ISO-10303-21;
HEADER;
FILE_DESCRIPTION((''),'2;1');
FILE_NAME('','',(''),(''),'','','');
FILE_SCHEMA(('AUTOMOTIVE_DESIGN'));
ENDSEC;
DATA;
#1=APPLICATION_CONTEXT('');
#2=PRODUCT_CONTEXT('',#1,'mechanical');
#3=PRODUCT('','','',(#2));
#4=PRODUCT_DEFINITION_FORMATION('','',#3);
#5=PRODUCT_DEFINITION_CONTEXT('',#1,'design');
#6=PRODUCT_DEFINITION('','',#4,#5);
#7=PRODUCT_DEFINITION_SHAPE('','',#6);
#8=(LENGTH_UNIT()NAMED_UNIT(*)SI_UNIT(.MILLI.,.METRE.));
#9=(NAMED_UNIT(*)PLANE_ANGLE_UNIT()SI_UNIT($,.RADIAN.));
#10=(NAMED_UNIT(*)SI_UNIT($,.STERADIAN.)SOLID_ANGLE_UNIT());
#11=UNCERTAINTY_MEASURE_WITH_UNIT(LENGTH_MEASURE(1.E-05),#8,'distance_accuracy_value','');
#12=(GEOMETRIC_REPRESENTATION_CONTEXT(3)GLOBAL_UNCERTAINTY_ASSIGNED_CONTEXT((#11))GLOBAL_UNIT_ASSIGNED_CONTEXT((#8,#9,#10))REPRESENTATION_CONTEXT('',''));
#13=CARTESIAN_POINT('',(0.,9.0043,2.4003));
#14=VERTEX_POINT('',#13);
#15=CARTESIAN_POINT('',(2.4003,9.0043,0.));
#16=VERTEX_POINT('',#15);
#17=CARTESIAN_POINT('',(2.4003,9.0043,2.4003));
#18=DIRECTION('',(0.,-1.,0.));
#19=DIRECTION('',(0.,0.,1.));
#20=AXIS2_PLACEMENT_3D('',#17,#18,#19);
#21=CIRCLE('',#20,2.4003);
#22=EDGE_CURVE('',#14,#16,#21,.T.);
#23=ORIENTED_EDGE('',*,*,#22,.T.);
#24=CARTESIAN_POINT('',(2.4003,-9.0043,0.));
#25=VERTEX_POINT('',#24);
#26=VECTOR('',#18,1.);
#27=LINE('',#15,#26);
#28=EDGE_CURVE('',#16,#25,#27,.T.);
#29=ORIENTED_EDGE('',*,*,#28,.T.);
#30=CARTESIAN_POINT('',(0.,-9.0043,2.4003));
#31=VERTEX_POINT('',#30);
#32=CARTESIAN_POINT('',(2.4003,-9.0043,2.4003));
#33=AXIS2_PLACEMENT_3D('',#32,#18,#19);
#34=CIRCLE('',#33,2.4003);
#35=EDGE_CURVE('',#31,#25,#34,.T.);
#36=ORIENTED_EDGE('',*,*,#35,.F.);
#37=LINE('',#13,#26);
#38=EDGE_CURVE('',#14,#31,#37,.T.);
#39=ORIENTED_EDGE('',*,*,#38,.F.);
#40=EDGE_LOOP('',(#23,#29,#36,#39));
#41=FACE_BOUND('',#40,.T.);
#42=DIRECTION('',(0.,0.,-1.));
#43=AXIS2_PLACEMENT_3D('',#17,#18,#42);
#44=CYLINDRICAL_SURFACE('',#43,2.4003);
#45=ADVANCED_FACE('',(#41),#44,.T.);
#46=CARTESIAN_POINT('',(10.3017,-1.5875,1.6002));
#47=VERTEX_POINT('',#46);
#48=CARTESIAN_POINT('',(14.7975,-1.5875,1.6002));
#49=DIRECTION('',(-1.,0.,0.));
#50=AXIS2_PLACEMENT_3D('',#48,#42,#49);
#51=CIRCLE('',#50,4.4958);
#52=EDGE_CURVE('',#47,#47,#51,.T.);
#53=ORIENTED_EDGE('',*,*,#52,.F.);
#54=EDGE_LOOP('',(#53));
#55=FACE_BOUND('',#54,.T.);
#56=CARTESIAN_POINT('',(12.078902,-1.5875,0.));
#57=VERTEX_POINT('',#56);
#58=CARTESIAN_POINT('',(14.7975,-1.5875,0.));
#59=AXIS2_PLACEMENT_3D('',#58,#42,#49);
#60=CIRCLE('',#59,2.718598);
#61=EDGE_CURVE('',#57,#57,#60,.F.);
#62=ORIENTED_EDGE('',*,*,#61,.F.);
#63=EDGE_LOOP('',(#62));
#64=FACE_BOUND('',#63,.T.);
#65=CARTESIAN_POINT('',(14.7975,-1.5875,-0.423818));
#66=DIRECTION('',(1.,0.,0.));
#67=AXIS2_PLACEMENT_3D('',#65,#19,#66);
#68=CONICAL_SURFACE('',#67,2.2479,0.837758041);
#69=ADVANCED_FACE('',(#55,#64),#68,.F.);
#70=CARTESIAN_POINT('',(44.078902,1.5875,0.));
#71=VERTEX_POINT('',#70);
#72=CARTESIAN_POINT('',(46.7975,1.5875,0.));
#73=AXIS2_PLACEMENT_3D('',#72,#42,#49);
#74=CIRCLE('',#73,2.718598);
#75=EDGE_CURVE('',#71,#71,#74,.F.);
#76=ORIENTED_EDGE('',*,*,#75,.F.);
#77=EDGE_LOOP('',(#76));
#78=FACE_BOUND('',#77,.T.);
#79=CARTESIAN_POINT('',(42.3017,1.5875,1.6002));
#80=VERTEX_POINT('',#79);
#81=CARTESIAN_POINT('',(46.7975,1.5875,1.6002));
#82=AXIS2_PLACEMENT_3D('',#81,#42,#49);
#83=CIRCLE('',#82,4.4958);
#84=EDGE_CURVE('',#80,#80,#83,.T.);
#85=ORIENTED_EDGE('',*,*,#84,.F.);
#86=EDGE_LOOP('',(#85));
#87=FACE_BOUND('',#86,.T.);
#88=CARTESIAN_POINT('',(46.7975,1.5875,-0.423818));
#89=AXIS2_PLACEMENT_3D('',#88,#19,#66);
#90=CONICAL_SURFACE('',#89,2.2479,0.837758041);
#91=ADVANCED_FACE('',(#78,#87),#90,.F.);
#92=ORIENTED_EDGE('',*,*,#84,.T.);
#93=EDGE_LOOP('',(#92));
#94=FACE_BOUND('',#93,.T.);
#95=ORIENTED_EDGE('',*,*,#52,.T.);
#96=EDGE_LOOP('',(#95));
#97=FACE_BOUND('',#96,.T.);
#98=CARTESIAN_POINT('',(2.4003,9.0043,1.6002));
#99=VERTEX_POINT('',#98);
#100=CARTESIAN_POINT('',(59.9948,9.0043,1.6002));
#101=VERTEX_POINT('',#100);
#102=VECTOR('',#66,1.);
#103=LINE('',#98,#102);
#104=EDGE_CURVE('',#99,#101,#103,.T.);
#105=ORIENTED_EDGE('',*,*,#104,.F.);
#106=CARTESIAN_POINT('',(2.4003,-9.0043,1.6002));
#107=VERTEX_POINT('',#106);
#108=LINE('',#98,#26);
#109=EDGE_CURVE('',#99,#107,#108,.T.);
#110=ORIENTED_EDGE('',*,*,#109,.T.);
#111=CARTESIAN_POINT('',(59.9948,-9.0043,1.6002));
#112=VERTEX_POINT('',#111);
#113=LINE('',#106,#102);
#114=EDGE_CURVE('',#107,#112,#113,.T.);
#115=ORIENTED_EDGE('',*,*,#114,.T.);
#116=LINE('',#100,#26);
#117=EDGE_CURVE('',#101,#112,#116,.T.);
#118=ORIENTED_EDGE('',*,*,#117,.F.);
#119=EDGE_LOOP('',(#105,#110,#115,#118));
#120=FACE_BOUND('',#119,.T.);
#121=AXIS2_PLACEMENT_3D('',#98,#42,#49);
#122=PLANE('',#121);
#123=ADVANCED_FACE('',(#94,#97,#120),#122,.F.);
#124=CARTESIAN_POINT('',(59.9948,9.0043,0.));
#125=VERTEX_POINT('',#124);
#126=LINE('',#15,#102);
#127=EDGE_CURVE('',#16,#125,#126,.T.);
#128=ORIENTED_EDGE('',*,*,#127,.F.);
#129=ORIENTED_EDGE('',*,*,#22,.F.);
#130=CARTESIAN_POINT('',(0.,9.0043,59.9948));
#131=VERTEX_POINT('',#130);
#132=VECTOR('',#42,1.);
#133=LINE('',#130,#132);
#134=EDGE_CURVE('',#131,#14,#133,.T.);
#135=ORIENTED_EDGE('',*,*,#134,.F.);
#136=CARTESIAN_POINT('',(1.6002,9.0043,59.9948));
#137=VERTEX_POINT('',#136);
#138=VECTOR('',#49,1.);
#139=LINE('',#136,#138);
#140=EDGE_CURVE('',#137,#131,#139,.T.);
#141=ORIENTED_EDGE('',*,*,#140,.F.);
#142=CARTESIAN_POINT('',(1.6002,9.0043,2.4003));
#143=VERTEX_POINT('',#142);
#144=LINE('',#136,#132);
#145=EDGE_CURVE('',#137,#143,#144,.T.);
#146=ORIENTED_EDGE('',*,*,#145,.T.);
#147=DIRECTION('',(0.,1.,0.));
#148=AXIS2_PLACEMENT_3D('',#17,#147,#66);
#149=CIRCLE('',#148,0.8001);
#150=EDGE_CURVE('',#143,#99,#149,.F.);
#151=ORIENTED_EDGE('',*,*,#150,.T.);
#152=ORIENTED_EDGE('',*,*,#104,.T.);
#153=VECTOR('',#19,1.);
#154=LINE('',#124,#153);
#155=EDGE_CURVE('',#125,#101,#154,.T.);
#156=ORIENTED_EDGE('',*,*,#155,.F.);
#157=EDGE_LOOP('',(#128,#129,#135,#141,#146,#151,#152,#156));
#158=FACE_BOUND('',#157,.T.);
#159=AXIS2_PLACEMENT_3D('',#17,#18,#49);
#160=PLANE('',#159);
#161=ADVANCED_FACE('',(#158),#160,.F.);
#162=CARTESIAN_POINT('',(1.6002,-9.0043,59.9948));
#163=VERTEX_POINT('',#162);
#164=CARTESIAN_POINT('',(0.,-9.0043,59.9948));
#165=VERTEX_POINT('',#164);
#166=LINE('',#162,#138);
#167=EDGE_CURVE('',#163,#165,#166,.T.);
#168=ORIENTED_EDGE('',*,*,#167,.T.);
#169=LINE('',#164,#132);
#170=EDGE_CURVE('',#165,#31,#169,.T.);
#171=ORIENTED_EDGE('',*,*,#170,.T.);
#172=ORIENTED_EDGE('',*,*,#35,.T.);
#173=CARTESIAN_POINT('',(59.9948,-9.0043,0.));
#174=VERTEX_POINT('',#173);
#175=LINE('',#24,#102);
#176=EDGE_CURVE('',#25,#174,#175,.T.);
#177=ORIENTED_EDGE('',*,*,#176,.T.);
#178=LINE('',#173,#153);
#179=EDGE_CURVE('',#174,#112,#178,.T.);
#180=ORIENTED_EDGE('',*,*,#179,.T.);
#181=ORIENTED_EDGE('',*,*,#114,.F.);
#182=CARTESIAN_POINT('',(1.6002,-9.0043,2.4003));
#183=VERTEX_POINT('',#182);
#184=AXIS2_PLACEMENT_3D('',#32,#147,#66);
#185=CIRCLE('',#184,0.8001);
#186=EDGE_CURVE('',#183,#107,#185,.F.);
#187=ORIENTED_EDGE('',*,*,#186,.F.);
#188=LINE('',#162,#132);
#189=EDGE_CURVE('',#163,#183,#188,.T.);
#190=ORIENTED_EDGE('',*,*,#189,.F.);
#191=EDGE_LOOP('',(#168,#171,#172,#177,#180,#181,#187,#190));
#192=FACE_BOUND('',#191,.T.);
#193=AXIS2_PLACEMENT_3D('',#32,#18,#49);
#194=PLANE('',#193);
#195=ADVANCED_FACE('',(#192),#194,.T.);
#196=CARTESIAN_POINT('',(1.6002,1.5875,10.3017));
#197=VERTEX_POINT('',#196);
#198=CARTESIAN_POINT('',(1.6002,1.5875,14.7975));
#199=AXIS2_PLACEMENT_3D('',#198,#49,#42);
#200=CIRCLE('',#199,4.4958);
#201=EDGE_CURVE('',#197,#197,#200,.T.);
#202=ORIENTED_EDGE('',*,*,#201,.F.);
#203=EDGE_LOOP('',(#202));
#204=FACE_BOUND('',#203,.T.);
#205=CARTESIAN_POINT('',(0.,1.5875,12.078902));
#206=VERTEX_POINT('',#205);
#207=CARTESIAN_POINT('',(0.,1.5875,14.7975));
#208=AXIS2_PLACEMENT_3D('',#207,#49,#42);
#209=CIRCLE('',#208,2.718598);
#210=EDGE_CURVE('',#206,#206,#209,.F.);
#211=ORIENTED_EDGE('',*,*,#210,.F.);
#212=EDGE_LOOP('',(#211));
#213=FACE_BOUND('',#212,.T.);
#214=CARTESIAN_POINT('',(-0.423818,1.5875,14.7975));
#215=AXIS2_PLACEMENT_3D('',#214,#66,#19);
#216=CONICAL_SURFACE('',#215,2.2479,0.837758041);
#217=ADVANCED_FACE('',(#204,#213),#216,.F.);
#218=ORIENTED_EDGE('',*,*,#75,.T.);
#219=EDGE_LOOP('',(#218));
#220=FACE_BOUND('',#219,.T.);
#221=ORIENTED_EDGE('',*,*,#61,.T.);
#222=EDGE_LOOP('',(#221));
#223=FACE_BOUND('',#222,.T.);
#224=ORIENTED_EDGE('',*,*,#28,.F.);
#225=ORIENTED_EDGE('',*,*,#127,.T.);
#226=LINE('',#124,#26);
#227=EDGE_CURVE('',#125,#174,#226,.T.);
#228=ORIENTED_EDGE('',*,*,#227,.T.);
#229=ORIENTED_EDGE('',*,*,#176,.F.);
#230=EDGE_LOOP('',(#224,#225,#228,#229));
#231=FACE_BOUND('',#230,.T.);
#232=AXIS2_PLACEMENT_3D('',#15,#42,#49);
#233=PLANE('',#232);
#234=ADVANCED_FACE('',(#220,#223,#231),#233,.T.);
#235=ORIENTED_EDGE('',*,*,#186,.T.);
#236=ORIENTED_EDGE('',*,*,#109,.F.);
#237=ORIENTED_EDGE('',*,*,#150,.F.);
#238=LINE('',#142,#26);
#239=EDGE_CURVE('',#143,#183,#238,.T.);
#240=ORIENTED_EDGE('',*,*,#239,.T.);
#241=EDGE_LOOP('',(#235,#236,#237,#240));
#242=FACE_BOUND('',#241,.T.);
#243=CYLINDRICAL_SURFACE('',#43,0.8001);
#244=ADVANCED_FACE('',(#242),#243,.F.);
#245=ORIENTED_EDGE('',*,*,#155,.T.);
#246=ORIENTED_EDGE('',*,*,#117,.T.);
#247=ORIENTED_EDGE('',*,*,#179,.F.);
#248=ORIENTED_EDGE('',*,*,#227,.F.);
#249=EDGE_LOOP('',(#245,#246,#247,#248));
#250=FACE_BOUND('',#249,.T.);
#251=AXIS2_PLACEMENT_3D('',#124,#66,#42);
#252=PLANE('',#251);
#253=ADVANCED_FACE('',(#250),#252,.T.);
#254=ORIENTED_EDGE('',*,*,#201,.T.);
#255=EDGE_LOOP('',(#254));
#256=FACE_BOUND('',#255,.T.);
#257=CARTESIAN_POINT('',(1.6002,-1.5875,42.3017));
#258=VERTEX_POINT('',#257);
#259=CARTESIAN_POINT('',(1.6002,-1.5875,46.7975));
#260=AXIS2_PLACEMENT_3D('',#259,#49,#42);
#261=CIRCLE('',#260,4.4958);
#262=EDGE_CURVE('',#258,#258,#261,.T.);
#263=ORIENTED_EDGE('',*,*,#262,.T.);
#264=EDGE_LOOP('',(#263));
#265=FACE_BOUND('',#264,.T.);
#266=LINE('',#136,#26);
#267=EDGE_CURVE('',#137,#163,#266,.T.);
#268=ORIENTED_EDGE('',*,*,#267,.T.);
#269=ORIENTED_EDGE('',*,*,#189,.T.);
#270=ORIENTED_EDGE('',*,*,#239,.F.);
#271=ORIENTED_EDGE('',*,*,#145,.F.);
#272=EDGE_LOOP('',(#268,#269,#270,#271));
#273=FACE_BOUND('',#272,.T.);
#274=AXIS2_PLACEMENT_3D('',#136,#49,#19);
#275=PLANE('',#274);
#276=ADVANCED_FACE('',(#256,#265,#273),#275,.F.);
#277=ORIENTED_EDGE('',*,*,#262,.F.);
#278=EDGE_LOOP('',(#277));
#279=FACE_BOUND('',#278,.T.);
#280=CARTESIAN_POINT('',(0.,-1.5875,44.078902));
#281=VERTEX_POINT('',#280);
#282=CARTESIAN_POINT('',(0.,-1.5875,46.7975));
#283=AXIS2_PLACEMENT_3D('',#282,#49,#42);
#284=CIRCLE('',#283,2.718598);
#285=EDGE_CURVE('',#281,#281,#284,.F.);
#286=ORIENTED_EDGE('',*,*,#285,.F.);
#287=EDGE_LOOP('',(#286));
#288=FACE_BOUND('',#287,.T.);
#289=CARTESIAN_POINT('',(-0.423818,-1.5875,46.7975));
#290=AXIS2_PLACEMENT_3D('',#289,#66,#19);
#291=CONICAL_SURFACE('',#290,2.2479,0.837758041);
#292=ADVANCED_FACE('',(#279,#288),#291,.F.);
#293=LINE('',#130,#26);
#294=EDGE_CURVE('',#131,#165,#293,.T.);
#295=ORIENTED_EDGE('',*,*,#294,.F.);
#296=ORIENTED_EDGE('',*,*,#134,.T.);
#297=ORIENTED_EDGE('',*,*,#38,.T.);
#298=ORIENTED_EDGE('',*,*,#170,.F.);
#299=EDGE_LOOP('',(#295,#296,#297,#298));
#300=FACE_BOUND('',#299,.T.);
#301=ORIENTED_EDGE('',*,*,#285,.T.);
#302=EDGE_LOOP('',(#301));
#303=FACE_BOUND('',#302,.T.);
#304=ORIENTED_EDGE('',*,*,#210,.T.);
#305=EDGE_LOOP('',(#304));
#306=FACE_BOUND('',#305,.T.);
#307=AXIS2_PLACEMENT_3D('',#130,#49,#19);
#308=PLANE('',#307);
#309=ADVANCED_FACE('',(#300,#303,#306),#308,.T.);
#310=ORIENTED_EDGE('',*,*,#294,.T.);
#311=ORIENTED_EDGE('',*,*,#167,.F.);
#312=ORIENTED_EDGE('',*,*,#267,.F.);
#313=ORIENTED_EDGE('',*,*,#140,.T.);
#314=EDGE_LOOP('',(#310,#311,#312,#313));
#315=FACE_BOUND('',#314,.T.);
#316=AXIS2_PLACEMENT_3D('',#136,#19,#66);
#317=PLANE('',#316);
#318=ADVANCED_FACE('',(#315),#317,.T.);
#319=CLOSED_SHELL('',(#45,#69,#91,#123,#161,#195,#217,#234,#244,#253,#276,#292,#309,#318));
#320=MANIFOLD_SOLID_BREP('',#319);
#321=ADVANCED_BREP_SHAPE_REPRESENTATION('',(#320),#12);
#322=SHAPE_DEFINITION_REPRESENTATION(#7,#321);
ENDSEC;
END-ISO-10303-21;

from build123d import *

# Parameters (mm, degrees)
EXTRUDE_THIN2_DEPTH            = 9.0043
SKETCH4_R                      = 2.2479
CUT_EXTRUDE2_DEPTH             = 86.321916719
CHAMFER1_SIZE                  = 2.2479
CHAMFER1_SIZE_2                = 2.024018251
CIRPATTERN2_COUNT              = 2
CIRPATTERN2_ANGLE              = 180
CHAMFER1_OF_CIRPATTERN2_SIZE   = 2.024018251
CHAMFER1_OF_CIRPATTERN2_SIZE_2 = 2.2479


with BuildPart() as part:
    # Sketch3 → Extrude-Thin2 (new, symmetric)
    with BuildSketch(Plane(origin=(0, 0, 0), x_dir=(1, 0, 0), z_dir=(0, 1, 0))):
        with BuildLine():
            Line((0, -59.9948), (0, -2.4003))
            ThreePointArc((0, -2.4003), (0.703031593, -0.703031593), (2.4003, 0))
            Line((2.4003, 0), (59.9948, 0))
            Line((59.9948, 0), (59.9948, -1.6002))
            Line((59.9948, -1.6002), (2.4003, -1.6002))
            ThreePointArc((2.4003, -1.6002), (1.834543864, -1.834543864), (1.6002, -2.4003))
            Line((1.6002, -2.4003), (1.6002, -59.9948))
            Line((1.6002, -59.9948), (0, -59.9948))
        make_face()
    extrude(amount=EXTRUDE_THIN2_DEPTH, both=True)

    # Sketch4 → Cut-Extrude2 (cut, through all)
    with BuildSketch(Plane.XY):
        with Locations(Location((46.7975, 1.5875, 0), (0, 0, 180))):
            Circle(SKETCH4_R)
        with Locations(Location((14.7975, -1.5875, 0), (0, 0, 180))):
            Circle(SKETCH4_R)
    cut_extrude2 = extrude(amount=CUT_EXTRUDE2_DEPTH, mode=Mode.SUBTRACT)

    # Chamfer1
    # the kernel refuses this chamfer: 2.2479, 2.024018251 mm, written as the material it takes off along each edge
    with BuildSketch(Plane(origin=(46.7975, 1.5875, 1.6002), x_dir=(-1, 0, 0), z_dir=(0, -1, 0))) as chamfer1_piece_1:
        Polygon((2.2479 + CHAMFER1_SIZE, 0), (2.2479, CHAMFER1_SIZE_2), (2.2479, 0), align=None)
    revolve(axis=Axis((46.7975, 1.5875, 1.6002), (0, 0, -1)), mode=Mode.SUBTRACT)
    with BuildSketch(Plane(origin=(14.7975, -1.5875, 1.6002), x_dir=(-1, 0, 0), z_dir=(0, -1, 0))) as chamfer1_piece_2:
        Polygon((2.2479 + CHAMFER1_SIZE, 0), (2.2479, CHAMFER1_SIZE_2), (2.2479, 0), align=None)
    revolve(axis=Axis((14.7975, -1.5875, 1.6002), (0, 0, -1)), mode=Mode.SUBTRACT)

    # CirPattern2: Cut-Extrude2 ×2 about axis
    cirpattern2_axis = Axis((0, 0, 0), (0.7071067811865462, 0, 0.7071067811865489))
    for i in range(1, CIRPATTERN2_COUNT):
        add(cut_extrude2.rotate(cirpattern2_axis, i * CIRPATTERN2_ANGLE / (CIRPATTERN2_COUNT - 1)), mode=Mode.SUBTRACT)

    # Chamfer1 of CirPattern2
    # the kernel refuses this chamfer: 2.2479, 2.024018251 mm, written as the material it takes off along each edge
    with BuildSketch(Plane(origin=(1.6002, -1.5875, 46.7975), x_dir=(0, 0, -1), z_dir=(0, 1, 0))) as chamfer1_of_cirpattern2_piece_1:
        Polygon((2.2479, CHAMFER1_OF_CIRPATTERN2_SIZE), (2.2479 + CHAMFER1_OF_CIRPATTERN2_SIZE_2, 0), (2.2479, 0), align=None)
    revolve(axis=Axis((1.6002, -1.5875, 46.7975), (-1, 0, 0)), mode=Mode.SUBTRACT)
    with BuildSketch(Plane(origin=(1.6002, 1.5875, 14.7975), x_dir=(0, 0, -1), z_dir=(0, 1, 0))) as chamfer1_of_cirpattern2_piece_2:
        Polygon((2.2479, CHAMFER1_OF_CIRPATTERN2_SIZE), (2.2479 + CHAMFER1_OF_CIRPATTERN2_SIZE_2, 0), (2.2479, 0), align=None)
    revolve(axis=Axis((1.6002, 1.5875, 14.7975), (-1, 0, 0)), mode=Mode.SUBTRACT)


solid = part.part
